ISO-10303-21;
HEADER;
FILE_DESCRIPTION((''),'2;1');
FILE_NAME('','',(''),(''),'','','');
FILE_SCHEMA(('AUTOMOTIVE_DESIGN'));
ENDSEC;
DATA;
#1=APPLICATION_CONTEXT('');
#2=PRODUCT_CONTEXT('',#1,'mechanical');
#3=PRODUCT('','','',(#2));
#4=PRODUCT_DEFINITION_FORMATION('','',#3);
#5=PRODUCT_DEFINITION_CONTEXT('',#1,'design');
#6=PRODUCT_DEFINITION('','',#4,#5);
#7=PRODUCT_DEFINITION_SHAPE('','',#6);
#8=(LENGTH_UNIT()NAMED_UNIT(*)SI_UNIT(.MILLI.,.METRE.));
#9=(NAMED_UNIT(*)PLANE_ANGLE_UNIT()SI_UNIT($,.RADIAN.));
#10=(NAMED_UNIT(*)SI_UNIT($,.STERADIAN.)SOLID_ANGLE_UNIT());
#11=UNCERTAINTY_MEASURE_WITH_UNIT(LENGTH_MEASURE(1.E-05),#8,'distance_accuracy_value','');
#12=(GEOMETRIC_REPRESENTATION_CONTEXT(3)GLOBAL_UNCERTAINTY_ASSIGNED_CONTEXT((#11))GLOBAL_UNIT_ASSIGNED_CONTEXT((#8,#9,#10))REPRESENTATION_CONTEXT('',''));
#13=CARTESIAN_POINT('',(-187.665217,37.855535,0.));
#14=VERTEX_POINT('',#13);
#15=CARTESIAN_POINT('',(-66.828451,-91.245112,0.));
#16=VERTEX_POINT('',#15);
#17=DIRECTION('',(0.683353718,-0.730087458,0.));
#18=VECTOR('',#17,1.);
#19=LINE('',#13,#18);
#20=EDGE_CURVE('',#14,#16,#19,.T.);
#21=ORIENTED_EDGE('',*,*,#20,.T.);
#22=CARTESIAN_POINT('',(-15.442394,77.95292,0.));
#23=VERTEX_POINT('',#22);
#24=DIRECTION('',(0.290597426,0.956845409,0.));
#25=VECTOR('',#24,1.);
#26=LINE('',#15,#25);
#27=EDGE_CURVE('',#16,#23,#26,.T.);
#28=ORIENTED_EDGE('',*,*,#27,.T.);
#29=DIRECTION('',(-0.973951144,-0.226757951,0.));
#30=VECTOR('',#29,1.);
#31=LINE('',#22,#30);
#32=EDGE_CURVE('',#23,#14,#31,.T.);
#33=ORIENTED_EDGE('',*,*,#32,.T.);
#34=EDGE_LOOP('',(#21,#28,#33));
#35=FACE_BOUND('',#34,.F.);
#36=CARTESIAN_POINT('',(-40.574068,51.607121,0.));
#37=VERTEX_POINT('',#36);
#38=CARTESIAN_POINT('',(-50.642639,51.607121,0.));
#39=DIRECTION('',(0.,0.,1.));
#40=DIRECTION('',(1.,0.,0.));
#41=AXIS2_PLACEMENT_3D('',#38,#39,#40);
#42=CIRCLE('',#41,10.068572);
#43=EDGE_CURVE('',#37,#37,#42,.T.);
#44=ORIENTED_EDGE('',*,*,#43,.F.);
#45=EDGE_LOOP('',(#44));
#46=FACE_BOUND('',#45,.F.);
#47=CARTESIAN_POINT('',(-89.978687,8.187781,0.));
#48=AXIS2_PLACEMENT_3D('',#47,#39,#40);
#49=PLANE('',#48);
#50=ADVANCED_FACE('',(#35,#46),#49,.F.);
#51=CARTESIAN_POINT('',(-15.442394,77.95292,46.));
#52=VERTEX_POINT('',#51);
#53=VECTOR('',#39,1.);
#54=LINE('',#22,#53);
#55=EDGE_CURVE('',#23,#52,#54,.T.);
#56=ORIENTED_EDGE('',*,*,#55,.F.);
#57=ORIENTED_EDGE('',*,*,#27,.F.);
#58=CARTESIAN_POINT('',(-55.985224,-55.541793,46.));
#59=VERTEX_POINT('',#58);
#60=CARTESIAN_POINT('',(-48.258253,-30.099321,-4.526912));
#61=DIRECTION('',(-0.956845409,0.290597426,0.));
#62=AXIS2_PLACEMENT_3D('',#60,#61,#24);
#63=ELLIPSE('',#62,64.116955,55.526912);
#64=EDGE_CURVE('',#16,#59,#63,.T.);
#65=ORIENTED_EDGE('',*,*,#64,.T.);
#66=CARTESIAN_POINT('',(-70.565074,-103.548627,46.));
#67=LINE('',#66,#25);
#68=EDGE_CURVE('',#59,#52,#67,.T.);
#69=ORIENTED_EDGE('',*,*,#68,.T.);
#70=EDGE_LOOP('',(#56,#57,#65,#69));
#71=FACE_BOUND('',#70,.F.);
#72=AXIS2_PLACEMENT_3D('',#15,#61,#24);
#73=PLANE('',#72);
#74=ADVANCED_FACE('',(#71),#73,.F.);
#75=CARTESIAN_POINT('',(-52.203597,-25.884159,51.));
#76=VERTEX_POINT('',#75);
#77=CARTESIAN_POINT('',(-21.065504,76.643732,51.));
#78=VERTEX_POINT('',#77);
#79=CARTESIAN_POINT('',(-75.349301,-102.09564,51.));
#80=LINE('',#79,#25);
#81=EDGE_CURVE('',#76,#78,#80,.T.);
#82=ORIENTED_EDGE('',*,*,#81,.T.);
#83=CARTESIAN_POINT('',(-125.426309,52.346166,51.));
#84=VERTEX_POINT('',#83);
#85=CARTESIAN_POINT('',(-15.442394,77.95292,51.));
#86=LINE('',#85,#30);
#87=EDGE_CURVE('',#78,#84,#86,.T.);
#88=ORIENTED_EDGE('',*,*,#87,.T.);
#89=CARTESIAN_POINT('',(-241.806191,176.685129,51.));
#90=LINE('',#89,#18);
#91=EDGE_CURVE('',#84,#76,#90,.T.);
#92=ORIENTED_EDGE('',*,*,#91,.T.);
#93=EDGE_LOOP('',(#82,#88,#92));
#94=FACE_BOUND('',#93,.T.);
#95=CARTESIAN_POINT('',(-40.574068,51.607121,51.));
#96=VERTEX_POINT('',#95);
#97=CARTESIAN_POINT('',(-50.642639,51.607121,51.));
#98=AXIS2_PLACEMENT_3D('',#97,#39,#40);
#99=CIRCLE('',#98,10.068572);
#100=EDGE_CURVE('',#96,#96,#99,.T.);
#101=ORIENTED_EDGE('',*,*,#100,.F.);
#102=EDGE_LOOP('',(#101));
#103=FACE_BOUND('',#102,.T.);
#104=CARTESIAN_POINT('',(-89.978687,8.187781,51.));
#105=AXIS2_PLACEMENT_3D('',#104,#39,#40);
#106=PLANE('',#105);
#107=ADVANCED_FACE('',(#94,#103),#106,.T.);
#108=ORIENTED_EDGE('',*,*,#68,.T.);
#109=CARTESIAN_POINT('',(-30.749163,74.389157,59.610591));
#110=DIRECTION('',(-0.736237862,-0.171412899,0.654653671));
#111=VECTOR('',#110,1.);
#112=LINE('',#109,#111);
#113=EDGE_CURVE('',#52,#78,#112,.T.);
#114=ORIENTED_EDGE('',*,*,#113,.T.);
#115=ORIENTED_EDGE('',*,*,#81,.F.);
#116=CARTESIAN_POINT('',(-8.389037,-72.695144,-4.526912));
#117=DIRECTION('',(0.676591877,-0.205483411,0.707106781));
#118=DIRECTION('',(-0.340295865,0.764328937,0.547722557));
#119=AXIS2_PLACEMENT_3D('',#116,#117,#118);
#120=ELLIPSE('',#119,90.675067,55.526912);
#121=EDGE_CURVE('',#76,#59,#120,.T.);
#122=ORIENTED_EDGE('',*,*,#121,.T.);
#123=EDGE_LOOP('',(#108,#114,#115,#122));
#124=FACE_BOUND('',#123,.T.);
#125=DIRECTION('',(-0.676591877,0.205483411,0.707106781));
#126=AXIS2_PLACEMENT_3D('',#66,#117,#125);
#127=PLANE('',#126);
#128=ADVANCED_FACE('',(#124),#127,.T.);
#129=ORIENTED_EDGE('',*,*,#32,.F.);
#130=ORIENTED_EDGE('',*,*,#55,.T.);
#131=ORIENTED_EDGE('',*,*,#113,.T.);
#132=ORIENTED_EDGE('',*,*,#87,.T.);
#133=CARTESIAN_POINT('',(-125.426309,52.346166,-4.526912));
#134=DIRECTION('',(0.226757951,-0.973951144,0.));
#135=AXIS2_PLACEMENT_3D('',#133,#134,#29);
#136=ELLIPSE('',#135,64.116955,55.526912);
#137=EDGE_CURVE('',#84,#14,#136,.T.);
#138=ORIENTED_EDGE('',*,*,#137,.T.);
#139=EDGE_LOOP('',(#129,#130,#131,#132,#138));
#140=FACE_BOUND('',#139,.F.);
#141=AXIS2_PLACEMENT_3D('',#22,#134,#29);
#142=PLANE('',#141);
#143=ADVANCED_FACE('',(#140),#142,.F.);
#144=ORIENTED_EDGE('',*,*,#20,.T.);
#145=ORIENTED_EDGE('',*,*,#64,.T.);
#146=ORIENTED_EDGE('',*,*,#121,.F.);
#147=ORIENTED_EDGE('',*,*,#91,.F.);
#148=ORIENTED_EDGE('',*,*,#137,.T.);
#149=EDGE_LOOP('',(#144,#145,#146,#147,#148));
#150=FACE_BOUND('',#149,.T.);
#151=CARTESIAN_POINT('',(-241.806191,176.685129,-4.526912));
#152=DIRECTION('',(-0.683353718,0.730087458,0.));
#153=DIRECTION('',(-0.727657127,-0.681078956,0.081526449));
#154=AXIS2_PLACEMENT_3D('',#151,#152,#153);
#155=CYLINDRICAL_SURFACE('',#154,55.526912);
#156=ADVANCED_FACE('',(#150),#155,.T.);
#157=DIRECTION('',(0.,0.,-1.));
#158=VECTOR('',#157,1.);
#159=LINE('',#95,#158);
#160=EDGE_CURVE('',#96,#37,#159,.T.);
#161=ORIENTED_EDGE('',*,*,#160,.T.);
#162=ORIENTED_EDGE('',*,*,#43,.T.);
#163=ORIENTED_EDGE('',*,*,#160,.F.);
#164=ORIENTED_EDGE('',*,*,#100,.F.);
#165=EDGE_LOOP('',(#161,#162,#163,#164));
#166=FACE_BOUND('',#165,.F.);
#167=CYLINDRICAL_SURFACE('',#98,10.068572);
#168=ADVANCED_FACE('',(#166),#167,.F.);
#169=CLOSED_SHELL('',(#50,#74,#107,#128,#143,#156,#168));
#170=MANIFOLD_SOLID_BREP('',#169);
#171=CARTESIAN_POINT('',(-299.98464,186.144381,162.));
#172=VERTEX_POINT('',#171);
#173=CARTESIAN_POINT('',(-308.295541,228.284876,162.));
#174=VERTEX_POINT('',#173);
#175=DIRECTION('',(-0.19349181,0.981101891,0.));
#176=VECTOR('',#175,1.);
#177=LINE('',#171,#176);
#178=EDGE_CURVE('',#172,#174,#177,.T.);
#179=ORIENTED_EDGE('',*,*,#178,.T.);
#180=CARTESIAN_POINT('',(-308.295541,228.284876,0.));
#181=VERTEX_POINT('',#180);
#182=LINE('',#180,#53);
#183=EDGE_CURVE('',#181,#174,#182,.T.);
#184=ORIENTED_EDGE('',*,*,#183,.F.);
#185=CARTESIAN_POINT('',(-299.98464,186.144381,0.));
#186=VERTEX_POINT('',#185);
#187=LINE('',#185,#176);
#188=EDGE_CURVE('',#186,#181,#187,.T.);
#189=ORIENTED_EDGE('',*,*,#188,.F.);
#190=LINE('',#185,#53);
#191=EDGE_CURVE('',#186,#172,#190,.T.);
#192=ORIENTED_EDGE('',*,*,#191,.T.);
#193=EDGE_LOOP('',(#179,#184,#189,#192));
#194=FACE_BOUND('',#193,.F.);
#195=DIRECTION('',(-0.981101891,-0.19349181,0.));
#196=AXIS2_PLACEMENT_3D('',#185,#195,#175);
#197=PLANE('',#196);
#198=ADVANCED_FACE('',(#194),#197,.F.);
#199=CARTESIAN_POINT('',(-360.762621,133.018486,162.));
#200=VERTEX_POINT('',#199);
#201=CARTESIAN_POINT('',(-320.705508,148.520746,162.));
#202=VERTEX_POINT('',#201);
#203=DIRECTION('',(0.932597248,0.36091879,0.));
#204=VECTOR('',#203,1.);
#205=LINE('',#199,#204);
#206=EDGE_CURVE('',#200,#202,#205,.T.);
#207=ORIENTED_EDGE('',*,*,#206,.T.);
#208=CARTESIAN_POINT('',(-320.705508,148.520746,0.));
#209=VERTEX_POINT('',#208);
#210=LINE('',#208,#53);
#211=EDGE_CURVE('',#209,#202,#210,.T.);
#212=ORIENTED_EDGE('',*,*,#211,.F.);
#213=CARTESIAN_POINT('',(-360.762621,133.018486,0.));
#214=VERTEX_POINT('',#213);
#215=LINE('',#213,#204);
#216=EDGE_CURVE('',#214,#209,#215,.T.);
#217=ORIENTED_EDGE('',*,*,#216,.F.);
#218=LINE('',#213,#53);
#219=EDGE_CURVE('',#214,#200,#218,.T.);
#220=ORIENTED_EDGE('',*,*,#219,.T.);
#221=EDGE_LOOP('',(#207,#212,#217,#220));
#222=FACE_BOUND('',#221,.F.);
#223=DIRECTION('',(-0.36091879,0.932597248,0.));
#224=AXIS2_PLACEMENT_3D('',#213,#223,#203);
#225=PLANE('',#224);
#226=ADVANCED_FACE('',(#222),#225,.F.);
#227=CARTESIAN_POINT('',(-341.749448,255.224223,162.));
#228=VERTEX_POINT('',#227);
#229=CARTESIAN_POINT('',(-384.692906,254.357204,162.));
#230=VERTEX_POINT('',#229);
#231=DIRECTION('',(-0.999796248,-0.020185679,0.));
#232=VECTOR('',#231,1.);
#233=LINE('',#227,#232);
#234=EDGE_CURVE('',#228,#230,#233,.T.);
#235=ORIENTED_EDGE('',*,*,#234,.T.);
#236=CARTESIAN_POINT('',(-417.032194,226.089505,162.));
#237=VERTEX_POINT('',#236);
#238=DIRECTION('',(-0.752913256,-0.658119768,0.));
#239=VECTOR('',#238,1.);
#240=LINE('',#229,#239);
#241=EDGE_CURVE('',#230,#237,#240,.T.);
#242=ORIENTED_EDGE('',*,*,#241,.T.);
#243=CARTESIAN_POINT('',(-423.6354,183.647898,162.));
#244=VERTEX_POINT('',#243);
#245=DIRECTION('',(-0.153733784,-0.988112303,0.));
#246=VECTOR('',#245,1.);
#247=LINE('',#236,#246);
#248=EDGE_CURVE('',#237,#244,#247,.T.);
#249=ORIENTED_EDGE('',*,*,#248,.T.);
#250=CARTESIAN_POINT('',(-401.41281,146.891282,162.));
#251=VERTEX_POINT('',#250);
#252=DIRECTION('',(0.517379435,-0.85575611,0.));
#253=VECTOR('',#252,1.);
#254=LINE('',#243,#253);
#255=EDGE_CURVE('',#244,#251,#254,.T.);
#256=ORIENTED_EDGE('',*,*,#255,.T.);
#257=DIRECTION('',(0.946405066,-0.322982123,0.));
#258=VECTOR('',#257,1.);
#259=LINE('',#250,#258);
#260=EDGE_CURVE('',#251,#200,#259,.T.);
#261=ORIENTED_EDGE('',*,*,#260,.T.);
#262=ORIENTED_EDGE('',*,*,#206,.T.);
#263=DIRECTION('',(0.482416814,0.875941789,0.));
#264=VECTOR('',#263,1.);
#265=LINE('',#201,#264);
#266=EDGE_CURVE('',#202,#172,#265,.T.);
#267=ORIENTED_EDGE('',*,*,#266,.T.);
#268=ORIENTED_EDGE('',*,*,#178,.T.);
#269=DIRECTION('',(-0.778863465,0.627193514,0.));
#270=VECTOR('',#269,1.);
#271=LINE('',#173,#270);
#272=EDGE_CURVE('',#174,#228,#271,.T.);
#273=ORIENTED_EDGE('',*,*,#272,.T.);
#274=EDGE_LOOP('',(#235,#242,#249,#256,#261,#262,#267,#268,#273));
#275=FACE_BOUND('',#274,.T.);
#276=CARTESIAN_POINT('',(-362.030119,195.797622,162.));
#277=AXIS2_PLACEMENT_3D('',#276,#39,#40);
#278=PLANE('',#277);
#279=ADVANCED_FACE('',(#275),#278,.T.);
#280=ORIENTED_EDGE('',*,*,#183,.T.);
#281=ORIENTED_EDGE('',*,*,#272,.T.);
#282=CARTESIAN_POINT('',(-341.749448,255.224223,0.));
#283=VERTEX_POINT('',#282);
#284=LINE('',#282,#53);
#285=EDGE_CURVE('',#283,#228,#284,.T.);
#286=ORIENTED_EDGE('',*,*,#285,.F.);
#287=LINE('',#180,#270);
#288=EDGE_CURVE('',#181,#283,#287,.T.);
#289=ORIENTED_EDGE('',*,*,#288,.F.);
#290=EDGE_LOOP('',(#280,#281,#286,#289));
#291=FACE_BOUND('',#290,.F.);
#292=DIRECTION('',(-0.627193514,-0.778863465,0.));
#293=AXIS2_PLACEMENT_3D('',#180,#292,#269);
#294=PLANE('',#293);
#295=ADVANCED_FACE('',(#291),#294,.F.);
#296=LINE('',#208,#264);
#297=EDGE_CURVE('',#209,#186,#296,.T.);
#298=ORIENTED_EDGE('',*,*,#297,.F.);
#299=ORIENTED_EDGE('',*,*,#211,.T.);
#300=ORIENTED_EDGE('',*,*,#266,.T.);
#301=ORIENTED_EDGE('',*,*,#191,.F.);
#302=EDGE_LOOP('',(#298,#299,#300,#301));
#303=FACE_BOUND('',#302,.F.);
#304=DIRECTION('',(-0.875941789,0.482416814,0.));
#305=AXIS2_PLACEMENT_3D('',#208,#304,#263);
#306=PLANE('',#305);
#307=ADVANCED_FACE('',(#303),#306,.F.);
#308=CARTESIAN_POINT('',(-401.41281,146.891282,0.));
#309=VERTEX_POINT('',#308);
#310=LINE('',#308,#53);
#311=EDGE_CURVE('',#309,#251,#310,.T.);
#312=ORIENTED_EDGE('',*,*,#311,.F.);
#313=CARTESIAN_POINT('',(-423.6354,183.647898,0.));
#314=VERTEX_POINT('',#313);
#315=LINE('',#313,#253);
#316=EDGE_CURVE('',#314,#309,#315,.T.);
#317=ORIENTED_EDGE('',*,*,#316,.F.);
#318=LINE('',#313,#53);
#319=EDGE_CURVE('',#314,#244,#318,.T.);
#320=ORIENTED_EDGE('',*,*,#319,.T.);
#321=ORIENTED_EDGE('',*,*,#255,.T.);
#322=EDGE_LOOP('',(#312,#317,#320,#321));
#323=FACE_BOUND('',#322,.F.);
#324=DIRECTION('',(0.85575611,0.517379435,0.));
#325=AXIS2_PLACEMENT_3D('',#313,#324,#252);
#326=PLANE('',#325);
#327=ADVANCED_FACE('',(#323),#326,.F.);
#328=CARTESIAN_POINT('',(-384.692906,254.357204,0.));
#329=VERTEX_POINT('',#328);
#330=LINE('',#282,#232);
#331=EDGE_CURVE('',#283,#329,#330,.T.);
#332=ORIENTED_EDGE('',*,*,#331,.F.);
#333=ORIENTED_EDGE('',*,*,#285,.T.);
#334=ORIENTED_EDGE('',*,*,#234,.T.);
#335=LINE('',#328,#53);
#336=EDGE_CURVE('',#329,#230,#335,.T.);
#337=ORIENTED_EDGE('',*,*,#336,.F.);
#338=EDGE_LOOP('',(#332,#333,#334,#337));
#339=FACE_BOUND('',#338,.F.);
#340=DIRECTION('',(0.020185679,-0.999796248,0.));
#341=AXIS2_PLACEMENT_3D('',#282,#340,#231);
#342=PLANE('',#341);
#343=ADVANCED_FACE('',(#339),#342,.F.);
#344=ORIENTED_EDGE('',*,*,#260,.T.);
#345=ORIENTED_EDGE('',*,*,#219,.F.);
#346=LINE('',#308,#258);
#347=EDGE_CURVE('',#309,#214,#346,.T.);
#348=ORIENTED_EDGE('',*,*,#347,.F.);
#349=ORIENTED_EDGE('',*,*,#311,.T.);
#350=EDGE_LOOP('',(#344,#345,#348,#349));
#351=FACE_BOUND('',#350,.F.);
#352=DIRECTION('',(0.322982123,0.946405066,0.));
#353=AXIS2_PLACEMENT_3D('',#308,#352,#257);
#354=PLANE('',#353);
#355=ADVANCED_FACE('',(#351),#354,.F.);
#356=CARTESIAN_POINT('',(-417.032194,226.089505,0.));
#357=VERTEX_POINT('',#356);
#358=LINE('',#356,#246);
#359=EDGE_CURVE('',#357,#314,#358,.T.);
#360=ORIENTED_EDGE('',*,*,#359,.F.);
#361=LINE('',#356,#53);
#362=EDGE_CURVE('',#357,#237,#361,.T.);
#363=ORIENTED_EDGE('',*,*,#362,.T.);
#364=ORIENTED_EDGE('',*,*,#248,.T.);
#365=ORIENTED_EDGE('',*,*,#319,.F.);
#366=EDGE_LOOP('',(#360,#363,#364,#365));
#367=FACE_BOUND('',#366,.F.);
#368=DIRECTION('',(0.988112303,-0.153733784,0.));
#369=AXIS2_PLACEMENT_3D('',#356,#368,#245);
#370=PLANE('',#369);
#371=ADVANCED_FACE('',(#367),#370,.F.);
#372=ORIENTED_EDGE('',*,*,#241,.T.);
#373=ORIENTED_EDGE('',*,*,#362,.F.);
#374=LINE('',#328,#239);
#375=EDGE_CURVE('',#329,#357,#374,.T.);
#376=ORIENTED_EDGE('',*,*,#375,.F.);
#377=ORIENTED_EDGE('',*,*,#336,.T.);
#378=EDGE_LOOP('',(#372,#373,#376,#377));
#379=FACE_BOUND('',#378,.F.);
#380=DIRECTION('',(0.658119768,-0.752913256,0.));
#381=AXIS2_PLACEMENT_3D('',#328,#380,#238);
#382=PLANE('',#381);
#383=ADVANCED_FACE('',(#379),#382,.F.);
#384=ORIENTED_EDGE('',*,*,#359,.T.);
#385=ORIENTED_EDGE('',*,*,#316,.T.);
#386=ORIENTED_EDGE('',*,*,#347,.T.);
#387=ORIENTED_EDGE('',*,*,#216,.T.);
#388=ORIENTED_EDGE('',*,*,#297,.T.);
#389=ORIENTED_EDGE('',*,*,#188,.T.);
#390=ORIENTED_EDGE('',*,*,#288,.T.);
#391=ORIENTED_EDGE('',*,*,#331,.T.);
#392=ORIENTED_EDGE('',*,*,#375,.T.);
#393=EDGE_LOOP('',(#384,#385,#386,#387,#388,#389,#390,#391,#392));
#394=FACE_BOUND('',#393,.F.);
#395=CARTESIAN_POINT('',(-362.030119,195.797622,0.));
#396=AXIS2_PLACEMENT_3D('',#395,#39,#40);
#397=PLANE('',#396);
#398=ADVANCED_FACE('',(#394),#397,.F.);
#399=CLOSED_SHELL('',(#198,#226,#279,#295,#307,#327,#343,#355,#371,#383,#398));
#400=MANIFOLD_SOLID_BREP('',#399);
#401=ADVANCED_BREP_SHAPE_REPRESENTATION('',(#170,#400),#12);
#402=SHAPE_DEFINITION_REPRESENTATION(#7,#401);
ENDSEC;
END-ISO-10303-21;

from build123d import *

# Parameters (mm, degrees)
F1_DEPTH    = 51
F2_T1_DEPTH = 202.5458455168
F3_T1_DEPTH = 447.7658767431
F4_R        = 10.0685716687
F5_DEPTH    = 111
F7_DEPTH    = 162


# Not quite as in the source:
# - a fillet or chamfer that OpenCascade refuses, or shapes differently, is made with other operations: its cross-section is extruded or revolved along the edge and cut away or added


with BuildPart() as f1:
    # F0 (on Top) → F1 (new body)
    with BuildSketch(Plane.XY):
        Polygon((-66.8284512856, -91.2451116348), (-15.4423944853, 77.9529200846), (-187.6652166247, 37.8555348143), align=None)
    extrude(amount=F1_DEPTH)

    # F2: chamfer of 5 on 1 edges, made by hand

    # F2_s2 → F2_t1 (cut)
    with BuildSketch(Plane(origin=(-34.7514003583, -114.42536957, 0), x_dir=(0, 0, 1), z_dir=(0.2905974261, 0.9568454086, 0))):
        Polygon((46, -37.428902193), (51, -42.428902193), (51, -37.428902193), align=None)
    extrude(amount=F2_T1_DEPTH, mode=Mode.SUBTRACT)

    # F3: fillet of radius 55.5269119346 on 1 edges, made by hand

    # F3_s2 → F3_t1 (cut)
    with BuildSketch(Plane(origin=(-201.066415005, 214.8171054023, 0), x_dir=(0, 0, 1), z_dir=(0.6833537183, -0.7300874576, 0))):
        with BuildLine():
            ThreePointArc((0, 111.1433004041), (36.3056938439, 93.4301560684), (51, 55.8012276445))
            Line((51, 55.8012276445), (51, 111.1433004041))
            Line((51, 111.1433004041), (0, 111.1433004041))
        make_face()
    extrude(amount=F3_T1_DEPTH, mode=Mode.SUBTRACT)

    # F4 (on face) → F5 (cut)
    with BuildSketch(Plane.XY.offset(51)):
        with Locations((-50.6426393986, 51.6071207821)):
            Circle(F4_R)
    extrude(amount=-F5_DEPTH, mode=Mode.SUBTRACT)


with BuildPart() as f7:
    # F6 (on Top) → F7 (new body)
    with BuildSketch(Plane.XY):
        Polygon((-360.7626209722, 133.0184859606), (-320.7055081859, 148.5207455781), (-299.9846399328, 186.1443811928), (-308.2955407554, 228.2848755603), (-341.7494477934, 255.2242230267), (-384.6929061449, 254.357203515), (-417.0321943839, 226.0895050905), (-423.6354001323, 183.6478980066), (-401.4128100338, 146.8912819037), align=None)
    extrude(amount=F7_DEPTH)


solid = Compound([f1.part, f7.part])
